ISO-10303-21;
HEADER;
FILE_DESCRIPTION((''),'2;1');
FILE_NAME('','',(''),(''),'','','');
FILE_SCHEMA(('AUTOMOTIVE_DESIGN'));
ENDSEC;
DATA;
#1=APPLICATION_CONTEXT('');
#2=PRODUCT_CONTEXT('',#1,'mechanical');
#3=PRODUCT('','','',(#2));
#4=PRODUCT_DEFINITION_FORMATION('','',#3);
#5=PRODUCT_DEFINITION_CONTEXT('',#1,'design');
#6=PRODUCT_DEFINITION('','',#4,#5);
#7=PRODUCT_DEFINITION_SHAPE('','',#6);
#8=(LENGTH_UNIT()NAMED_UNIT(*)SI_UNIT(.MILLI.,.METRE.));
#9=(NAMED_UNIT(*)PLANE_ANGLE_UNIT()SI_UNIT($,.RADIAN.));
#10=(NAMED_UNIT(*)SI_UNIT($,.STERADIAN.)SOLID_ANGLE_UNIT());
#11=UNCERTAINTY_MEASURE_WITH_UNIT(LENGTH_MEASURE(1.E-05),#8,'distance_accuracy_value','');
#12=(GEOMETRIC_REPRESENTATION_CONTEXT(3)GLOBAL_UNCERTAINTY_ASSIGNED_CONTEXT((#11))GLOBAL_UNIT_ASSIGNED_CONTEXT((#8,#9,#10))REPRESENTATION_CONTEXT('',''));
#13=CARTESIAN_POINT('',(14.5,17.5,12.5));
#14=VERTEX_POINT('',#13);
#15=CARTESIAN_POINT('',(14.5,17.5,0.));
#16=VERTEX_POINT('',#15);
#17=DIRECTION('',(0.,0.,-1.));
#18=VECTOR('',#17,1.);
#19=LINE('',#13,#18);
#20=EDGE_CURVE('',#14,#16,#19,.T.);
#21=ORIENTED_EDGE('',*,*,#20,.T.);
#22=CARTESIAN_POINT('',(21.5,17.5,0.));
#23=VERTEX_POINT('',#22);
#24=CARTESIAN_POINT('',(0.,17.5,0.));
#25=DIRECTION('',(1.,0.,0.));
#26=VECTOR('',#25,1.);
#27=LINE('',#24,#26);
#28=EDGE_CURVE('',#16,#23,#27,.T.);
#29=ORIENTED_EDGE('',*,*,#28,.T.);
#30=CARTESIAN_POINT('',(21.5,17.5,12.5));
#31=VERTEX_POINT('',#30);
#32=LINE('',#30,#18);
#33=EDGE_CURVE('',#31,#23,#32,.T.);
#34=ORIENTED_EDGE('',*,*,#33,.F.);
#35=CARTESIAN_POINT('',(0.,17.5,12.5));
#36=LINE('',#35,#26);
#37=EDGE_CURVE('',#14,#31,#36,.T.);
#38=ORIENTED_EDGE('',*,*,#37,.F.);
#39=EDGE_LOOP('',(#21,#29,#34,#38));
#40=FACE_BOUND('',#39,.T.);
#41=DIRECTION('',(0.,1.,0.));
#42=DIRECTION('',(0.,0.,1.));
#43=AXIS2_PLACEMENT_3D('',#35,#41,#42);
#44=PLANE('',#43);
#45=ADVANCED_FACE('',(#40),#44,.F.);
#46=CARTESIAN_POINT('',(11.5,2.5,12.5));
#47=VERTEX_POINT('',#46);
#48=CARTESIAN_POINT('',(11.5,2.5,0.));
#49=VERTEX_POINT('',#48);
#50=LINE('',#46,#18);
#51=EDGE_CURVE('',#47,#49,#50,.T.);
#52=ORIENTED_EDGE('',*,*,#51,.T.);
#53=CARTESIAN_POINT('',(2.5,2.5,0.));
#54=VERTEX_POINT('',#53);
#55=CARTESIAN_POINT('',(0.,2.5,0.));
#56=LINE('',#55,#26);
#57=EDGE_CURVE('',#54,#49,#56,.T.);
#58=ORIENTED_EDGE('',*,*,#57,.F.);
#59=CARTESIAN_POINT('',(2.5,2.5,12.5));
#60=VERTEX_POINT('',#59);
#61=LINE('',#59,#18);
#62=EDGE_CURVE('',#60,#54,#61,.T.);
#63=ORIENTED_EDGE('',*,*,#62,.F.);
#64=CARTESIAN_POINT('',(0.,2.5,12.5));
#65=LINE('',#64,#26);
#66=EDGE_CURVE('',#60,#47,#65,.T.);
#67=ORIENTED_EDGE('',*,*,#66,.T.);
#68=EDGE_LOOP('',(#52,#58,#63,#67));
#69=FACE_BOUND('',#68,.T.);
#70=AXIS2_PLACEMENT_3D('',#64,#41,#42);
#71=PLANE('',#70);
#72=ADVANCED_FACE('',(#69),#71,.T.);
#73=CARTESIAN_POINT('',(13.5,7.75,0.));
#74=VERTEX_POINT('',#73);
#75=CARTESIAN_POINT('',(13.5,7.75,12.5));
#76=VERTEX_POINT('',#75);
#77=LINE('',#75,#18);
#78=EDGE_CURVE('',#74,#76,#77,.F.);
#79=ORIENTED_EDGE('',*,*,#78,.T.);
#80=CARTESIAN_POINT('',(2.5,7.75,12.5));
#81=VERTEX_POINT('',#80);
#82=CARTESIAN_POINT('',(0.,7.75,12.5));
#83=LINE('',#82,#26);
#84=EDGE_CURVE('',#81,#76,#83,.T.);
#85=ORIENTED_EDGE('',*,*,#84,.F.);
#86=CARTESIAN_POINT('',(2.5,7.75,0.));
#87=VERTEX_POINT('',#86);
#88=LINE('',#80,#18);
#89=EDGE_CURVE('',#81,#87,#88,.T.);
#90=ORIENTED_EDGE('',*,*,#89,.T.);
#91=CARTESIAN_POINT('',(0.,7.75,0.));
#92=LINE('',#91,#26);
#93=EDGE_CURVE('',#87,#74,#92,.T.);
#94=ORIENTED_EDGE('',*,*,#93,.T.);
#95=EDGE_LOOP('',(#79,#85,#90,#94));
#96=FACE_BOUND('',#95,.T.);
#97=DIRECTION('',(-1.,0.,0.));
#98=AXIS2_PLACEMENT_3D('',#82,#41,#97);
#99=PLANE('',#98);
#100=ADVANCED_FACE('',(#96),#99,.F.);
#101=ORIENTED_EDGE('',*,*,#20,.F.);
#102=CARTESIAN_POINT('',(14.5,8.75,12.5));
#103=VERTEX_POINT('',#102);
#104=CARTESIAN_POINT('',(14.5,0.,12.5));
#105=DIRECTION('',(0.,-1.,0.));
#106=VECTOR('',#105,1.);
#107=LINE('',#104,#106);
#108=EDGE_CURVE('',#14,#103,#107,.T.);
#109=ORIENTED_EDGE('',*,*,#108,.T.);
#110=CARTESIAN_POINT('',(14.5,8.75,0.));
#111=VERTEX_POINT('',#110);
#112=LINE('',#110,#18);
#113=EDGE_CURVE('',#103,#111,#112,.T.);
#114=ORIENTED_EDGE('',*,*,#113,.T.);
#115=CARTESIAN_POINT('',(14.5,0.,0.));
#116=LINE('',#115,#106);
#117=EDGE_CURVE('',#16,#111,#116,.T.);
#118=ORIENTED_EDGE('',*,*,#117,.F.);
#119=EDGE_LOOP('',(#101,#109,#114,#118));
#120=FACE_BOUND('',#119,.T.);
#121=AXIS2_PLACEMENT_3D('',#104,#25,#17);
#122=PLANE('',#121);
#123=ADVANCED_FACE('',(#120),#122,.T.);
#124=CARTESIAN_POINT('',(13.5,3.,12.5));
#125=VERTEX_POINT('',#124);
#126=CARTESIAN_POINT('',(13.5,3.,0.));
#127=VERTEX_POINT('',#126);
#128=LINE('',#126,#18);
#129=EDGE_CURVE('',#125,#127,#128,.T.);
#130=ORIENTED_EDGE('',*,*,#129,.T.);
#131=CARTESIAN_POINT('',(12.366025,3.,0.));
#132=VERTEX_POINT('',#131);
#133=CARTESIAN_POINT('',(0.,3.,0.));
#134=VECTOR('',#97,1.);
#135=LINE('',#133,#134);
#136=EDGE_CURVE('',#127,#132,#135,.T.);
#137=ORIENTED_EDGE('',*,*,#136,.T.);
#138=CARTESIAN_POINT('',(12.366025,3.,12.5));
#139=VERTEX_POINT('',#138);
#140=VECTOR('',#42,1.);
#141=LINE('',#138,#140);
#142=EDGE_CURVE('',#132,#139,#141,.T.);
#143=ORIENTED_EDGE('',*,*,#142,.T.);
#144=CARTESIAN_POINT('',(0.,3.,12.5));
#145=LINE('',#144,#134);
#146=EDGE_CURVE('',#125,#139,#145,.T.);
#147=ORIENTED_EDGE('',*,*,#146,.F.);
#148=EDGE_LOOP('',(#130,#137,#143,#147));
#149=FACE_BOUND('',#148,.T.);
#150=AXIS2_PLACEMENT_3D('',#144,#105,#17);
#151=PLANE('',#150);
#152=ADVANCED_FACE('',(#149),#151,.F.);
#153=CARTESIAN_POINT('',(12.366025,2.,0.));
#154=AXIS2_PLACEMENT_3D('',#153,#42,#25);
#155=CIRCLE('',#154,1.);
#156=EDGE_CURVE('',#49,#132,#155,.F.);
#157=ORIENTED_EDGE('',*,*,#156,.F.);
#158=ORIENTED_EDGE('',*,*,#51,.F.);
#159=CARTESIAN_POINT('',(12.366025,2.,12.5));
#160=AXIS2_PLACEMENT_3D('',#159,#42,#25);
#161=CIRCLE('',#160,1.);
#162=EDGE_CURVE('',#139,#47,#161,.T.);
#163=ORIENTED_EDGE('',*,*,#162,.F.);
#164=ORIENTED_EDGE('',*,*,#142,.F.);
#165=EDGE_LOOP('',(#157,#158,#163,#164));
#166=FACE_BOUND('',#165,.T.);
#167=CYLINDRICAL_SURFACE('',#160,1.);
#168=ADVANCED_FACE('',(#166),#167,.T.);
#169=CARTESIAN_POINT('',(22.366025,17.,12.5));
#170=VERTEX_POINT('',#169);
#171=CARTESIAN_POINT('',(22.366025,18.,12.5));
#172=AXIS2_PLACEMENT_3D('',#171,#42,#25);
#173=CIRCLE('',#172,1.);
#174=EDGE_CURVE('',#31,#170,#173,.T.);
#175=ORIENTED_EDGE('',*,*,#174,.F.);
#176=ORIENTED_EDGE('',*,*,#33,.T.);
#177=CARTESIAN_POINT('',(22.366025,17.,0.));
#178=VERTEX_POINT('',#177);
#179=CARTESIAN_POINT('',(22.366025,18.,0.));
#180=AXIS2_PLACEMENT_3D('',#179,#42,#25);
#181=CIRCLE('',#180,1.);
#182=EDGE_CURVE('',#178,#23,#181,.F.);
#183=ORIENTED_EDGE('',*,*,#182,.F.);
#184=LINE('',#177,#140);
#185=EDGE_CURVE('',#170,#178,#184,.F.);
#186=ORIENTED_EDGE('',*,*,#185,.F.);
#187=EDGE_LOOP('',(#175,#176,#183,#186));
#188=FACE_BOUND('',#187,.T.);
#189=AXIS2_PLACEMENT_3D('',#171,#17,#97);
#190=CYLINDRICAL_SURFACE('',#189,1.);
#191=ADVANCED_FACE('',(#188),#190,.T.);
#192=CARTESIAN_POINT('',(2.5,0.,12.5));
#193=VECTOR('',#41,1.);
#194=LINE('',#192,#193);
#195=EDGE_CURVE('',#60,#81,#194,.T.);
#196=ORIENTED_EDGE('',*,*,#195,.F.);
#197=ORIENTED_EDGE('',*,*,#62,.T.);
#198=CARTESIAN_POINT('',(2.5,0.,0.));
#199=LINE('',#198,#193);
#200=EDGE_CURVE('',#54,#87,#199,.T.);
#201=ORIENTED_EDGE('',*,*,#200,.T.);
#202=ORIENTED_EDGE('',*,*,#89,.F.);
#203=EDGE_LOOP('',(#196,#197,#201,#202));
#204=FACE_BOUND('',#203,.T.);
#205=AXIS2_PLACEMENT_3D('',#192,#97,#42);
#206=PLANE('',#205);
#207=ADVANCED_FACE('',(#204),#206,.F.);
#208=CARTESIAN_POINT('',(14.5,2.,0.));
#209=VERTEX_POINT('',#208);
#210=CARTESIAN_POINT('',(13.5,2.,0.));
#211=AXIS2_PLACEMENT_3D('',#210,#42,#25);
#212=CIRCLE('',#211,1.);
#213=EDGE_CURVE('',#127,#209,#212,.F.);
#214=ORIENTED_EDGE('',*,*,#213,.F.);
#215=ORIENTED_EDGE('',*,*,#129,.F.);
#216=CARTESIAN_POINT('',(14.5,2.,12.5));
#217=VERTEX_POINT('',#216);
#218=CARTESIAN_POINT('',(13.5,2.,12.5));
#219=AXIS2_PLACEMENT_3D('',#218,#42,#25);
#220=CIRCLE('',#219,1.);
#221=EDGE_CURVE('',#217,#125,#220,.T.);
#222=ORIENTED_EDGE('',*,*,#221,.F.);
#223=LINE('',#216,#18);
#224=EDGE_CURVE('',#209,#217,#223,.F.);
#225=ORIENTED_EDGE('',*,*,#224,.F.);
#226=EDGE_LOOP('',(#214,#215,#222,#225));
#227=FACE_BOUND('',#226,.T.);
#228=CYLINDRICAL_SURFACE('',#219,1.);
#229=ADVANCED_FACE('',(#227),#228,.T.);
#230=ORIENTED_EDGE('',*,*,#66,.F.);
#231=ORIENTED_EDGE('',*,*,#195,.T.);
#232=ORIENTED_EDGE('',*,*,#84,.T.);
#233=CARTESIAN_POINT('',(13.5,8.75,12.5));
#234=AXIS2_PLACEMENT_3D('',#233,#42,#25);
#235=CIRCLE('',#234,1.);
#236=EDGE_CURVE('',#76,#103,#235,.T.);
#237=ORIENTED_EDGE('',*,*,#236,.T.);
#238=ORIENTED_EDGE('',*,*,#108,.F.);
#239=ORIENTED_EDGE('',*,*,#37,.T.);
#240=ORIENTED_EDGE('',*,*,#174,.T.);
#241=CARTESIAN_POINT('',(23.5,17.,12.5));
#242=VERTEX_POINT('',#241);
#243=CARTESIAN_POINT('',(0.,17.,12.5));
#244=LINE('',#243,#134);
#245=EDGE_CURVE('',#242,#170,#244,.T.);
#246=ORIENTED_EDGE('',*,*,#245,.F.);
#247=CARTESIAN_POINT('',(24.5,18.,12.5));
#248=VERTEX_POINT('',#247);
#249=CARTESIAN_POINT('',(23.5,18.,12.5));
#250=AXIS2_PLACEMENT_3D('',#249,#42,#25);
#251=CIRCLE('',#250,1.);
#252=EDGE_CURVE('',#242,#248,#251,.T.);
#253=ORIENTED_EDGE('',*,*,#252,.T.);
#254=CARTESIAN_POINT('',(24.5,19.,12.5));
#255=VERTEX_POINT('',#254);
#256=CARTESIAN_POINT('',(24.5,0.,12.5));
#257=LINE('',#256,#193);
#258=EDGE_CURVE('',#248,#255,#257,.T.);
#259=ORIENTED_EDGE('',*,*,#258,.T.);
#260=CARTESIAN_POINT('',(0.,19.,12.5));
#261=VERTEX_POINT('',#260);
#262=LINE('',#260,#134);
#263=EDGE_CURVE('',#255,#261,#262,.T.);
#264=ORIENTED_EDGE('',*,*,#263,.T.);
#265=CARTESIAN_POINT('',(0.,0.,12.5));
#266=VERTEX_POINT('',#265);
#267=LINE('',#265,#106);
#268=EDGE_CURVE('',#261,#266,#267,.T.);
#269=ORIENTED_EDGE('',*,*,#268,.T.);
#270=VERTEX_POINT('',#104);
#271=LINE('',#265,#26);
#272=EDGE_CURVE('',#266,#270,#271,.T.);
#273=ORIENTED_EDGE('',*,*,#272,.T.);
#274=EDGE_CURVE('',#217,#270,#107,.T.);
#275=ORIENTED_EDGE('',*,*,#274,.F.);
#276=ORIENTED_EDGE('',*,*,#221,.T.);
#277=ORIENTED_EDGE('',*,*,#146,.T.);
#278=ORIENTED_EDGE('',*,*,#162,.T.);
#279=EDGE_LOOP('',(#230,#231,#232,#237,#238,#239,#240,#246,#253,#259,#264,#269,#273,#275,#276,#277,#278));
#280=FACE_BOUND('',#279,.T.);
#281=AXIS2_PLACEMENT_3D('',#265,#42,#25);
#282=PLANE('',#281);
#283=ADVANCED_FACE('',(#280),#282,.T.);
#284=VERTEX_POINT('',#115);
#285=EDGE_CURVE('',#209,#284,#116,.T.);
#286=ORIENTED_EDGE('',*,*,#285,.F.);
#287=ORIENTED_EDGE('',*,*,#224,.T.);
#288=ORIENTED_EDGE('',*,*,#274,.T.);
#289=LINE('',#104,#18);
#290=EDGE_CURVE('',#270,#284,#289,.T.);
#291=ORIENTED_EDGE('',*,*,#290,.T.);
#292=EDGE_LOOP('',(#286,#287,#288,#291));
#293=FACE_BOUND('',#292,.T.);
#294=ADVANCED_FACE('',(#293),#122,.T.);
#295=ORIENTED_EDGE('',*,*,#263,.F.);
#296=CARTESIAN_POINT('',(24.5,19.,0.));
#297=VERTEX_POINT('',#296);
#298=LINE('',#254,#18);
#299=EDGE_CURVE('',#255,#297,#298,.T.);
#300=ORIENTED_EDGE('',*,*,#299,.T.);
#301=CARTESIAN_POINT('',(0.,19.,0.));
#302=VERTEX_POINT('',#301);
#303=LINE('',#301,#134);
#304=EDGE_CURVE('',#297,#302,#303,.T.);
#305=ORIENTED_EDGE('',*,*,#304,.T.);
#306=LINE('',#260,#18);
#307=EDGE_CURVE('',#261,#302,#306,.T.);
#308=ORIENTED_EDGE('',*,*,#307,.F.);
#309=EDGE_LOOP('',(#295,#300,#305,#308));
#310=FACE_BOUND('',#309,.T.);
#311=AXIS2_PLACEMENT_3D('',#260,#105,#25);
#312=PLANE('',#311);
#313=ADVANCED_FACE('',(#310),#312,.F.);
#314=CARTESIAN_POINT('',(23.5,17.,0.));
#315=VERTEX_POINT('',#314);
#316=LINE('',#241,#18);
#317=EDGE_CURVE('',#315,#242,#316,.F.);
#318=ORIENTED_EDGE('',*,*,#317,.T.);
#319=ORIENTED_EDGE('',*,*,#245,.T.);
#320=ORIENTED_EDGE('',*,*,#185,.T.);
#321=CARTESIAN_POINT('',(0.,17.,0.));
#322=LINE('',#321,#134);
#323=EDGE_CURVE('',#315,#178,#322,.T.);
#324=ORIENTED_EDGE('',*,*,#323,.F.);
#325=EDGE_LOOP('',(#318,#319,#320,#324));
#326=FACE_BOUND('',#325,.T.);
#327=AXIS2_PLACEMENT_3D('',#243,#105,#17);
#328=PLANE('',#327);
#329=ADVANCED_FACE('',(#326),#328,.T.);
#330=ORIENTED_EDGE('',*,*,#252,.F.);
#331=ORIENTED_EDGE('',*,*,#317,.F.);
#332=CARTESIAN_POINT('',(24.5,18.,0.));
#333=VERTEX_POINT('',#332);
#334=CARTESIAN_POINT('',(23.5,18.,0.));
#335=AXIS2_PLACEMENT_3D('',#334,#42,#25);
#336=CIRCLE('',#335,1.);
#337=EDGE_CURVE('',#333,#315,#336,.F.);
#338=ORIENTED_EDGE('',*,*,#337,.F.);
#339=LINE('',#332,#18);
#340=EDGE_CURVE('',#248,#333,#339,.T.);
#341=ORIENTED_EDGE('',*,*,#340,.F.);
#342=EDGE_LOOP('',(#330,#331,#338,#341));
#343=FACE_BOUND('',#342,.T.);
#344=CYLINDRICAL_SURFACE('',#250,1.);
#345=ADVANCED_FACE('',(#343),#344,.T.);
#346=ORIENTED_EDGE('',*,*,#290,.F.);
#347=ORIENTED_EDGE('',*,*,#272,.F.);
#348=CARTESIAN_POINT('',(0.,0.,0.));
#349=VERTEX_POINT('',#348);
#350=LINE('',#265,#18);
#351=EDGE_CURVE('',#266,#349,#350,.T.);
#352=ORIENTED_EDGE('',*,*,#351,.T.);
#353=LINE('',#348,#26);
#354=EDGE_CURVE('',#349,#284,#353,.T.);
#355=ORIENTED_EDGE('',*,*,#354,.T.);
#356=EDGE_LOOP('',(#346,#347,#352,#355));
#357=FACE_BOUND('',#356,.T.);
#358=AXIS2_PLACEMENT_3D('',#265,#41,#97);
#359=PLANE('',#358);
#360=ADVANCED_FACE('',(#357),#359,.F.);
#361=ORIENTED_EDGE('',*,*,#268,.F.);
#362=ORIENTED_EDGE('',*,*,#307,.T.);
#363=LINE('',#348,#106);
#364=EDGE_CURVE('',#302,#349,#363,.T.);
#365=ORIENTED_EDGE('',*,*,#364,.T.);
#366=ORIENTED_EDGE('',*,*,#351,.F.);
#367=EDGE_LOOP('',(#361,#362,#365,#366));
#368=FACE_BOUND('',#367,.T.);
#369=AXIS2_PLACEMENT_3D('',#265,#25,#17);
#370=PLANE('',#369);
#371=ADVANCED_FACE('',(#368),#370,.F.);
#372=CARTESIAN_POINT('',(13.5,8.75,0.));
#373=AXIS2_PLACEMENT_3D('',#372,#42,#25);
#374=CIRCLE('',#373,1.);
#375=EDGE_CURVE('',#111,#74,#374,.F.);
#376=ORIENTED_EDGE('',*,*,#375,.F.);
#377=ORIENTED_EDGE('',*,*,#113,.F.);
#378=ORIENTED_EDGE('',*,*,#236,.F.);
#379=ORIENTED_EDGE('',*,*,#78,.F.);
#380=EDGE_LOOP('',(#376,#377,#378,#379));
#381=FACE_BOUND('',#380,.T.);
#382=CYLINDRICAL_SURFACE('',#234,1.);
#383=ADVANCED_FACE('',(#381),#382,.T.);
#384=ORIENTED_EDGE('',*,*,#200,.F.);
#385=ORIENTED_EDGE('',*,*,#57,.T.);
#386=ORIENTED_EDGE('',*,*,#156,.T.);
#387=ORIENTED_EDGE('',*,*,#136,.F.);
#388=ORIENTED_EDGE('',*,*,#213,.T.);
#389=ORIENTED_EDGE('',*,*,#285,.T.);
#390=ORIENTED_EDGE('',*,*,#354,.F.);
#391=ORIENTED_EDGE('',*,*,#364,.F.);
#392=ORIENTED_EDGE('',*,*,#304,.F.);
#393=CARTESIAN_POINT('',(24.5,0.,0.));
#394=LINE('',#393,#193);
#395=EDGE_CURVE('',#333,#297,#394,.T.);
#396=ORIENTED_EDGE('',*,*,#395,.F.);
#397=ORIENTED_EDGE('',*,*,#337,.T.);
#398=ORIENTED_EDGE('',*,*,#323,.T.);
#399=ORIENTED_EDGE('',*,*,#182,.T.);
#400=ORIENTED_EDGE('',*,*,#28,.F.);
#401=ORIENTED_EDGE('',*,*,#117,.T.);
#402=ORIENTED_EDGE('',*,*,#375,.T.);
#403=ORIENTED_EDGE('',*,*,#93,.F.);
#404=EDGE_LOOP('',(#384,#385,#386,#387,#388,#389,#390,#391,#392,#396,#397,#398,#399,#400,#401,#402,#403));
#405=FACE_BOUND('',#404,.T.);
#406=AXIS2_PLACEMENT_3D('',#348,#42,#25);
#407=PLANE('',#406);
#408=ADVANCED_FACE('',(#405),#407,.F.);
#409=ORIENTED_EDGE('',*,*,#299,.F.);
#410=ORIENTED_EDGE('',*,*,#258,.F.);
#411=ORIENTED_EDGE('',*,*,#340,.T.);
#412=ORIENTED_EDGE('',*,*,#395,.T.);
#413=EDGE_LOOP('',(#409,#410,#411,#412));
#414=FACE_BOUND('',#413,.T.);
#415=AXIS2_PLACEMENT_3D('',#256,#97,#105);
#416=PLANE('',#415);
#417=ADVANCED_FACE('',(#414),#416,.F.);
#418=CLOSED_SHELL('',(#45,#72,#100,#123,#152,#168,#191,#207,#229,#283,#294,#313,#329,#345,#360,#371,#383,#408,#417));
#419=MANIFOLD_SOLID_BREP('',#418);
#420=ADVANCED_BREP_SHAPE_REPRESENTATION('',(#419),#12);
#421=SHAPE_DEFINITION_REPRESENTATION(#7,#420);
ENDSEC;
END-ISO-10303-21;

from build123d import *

# Parameters (mm, degrees)
SKETCH1_W           = 3
SKETCH1_H           = 0.5
BOSS_EXTRUDE1_DEPTH = 12.5
FILLET1_R           = 1


with BuildPart() as part:
    # Sketch1 → Boss-Extrude1 (new body)
    with BuildSketch(Plane.XY):
        Polygon((14.5, 17.5), (14.5, 7.75), (2.5, 7.75), (2.5, 2.5), (14.5, 2.5), (14.5, 0), (0, 0), (0, 19), (24.5, 19), (24.5, 17.5), align=None)
        with Locations((23, 17.25)):
            Rectangle(SKETCH1_W, SKETCH1_H)
        with Locations((13, 2.75)):
            Rectangle(SKETCH1_W, SKETCH1_H)
    extrude(amount=BOSS_EXTRUDE1_DEPTH)

    # Fillet1
    # the kernel refuses this fillet: 1 mm, written as the material it takes off along each edge
    with BuildSketch(Plane(origin=(24.5, 17, -2.5), x_dir=(-1, 0, 0), z_dir=(0, 0, 1)), Plane(origin=(14.5, 3, -2.5), x_dir=(0, -1, 0), z_dir=(0, 0, 1))) as fillet1_piece_1:
        with BuildLine():
            CenterArc((FILLET1_R, -FILLET1_R), FILLET1_R, 90, 90)
            Line((0, -FILLET1_R), (-FILLET1_R * 0.02, -FILLET1_R))
            Line((-FILLET1_R * 0.02, -FILLET1_R), (-FILLET1_R * 0.02, FILLET1_R * 0.02))
            Line((-FILLET1_R * 0.02, FILLET1_R * 0.02), (FILLET1_R, FILLET1_R * 0.02))
            Line((FILLET1_R, FILLET1_R * 0.02), (FILLET1_R, 0))
        make_face()
    extrude(amount=17.5, mode=Mode.SUBTRACT)
    with BuildSketch(Plane(origin=(21.5, 17, -2.165063509), x_dir=(0, 1, 0), z_dir=(0, 0, 1))) as fillet1_piece_2:
        with BuildLine():
            CenterArc((1, -0.866025404), FILLET1_R, 120, 60)
            Line((0, -0.866025404), (-0.02, -0.866025404))
            Line((-0.02, -0.866025404), (-0.02, 0))
            Line((-0.02, 0), (0, 0.02))
            ThreePointArc((0, 0.02), (0.25, 0.02), (0.49, 0.017320508))
            Line((0.49, 0.017320508), (0.5, 0))
        make_face()
    extrude(amount=16.830127019, mode=Mode.SUBTRACT)
    with BuildSketch(Plane(origin=(11.5, 3, -2.165063509), x_dir=(1, 0, 0), z_dir=(0, 0, 1))) as fillet1_piece_3:
        with BuildLine():
            CenterArc((0.866025404, -1), FILLET1_R, 90, 60)
            Line((0, -0.5), (-0.017320508, -0.49))
            ThreePointArc((-0.017320508, -0.49), (-0.02, -0.25), (-0.02, 0))
            Line((-0.02, 0), (0, 0.02))
            Line((0, 0.02), (0.866025404, 0.02))
            Line((0.866025404, 0.02), (0.866025404, 0))
        make_face()
    extrude(amount=16.830127019, mode=Mode.SUBTRACT)
    with BuildSketch(Plane(origin=(14.5, 7.75, -2.5), x_dir=(0, 1, 0), z_dir=(0, 0, 1))) as fillet1_piece_4:
        with BuildLine():
            CenterArc((FILLET1_R, FILLET1_R), FILLET1_R, 180, 90)
            Line((0, FILLET1_R), (-FILLET1_R * 0.02, FILLET1_R))
            Line((-FILLET1_R * 0.02, FILLET1_R), (-FILLET1_R * 0.02, -FILLET1_R * 0.02))
            Line((-FILLET1_R * 0.02, -FILLET1_R * 0.02), (FILLET1_R, -FILLET1_R * 0.02))
            Line((FILLET1_R, -FILLET1_R * 0.02), (FILLET1_R, 0))
        make_face()
    extrude(amount=17.5, mode=Mode.SUBTRACT)


solid = part.part
